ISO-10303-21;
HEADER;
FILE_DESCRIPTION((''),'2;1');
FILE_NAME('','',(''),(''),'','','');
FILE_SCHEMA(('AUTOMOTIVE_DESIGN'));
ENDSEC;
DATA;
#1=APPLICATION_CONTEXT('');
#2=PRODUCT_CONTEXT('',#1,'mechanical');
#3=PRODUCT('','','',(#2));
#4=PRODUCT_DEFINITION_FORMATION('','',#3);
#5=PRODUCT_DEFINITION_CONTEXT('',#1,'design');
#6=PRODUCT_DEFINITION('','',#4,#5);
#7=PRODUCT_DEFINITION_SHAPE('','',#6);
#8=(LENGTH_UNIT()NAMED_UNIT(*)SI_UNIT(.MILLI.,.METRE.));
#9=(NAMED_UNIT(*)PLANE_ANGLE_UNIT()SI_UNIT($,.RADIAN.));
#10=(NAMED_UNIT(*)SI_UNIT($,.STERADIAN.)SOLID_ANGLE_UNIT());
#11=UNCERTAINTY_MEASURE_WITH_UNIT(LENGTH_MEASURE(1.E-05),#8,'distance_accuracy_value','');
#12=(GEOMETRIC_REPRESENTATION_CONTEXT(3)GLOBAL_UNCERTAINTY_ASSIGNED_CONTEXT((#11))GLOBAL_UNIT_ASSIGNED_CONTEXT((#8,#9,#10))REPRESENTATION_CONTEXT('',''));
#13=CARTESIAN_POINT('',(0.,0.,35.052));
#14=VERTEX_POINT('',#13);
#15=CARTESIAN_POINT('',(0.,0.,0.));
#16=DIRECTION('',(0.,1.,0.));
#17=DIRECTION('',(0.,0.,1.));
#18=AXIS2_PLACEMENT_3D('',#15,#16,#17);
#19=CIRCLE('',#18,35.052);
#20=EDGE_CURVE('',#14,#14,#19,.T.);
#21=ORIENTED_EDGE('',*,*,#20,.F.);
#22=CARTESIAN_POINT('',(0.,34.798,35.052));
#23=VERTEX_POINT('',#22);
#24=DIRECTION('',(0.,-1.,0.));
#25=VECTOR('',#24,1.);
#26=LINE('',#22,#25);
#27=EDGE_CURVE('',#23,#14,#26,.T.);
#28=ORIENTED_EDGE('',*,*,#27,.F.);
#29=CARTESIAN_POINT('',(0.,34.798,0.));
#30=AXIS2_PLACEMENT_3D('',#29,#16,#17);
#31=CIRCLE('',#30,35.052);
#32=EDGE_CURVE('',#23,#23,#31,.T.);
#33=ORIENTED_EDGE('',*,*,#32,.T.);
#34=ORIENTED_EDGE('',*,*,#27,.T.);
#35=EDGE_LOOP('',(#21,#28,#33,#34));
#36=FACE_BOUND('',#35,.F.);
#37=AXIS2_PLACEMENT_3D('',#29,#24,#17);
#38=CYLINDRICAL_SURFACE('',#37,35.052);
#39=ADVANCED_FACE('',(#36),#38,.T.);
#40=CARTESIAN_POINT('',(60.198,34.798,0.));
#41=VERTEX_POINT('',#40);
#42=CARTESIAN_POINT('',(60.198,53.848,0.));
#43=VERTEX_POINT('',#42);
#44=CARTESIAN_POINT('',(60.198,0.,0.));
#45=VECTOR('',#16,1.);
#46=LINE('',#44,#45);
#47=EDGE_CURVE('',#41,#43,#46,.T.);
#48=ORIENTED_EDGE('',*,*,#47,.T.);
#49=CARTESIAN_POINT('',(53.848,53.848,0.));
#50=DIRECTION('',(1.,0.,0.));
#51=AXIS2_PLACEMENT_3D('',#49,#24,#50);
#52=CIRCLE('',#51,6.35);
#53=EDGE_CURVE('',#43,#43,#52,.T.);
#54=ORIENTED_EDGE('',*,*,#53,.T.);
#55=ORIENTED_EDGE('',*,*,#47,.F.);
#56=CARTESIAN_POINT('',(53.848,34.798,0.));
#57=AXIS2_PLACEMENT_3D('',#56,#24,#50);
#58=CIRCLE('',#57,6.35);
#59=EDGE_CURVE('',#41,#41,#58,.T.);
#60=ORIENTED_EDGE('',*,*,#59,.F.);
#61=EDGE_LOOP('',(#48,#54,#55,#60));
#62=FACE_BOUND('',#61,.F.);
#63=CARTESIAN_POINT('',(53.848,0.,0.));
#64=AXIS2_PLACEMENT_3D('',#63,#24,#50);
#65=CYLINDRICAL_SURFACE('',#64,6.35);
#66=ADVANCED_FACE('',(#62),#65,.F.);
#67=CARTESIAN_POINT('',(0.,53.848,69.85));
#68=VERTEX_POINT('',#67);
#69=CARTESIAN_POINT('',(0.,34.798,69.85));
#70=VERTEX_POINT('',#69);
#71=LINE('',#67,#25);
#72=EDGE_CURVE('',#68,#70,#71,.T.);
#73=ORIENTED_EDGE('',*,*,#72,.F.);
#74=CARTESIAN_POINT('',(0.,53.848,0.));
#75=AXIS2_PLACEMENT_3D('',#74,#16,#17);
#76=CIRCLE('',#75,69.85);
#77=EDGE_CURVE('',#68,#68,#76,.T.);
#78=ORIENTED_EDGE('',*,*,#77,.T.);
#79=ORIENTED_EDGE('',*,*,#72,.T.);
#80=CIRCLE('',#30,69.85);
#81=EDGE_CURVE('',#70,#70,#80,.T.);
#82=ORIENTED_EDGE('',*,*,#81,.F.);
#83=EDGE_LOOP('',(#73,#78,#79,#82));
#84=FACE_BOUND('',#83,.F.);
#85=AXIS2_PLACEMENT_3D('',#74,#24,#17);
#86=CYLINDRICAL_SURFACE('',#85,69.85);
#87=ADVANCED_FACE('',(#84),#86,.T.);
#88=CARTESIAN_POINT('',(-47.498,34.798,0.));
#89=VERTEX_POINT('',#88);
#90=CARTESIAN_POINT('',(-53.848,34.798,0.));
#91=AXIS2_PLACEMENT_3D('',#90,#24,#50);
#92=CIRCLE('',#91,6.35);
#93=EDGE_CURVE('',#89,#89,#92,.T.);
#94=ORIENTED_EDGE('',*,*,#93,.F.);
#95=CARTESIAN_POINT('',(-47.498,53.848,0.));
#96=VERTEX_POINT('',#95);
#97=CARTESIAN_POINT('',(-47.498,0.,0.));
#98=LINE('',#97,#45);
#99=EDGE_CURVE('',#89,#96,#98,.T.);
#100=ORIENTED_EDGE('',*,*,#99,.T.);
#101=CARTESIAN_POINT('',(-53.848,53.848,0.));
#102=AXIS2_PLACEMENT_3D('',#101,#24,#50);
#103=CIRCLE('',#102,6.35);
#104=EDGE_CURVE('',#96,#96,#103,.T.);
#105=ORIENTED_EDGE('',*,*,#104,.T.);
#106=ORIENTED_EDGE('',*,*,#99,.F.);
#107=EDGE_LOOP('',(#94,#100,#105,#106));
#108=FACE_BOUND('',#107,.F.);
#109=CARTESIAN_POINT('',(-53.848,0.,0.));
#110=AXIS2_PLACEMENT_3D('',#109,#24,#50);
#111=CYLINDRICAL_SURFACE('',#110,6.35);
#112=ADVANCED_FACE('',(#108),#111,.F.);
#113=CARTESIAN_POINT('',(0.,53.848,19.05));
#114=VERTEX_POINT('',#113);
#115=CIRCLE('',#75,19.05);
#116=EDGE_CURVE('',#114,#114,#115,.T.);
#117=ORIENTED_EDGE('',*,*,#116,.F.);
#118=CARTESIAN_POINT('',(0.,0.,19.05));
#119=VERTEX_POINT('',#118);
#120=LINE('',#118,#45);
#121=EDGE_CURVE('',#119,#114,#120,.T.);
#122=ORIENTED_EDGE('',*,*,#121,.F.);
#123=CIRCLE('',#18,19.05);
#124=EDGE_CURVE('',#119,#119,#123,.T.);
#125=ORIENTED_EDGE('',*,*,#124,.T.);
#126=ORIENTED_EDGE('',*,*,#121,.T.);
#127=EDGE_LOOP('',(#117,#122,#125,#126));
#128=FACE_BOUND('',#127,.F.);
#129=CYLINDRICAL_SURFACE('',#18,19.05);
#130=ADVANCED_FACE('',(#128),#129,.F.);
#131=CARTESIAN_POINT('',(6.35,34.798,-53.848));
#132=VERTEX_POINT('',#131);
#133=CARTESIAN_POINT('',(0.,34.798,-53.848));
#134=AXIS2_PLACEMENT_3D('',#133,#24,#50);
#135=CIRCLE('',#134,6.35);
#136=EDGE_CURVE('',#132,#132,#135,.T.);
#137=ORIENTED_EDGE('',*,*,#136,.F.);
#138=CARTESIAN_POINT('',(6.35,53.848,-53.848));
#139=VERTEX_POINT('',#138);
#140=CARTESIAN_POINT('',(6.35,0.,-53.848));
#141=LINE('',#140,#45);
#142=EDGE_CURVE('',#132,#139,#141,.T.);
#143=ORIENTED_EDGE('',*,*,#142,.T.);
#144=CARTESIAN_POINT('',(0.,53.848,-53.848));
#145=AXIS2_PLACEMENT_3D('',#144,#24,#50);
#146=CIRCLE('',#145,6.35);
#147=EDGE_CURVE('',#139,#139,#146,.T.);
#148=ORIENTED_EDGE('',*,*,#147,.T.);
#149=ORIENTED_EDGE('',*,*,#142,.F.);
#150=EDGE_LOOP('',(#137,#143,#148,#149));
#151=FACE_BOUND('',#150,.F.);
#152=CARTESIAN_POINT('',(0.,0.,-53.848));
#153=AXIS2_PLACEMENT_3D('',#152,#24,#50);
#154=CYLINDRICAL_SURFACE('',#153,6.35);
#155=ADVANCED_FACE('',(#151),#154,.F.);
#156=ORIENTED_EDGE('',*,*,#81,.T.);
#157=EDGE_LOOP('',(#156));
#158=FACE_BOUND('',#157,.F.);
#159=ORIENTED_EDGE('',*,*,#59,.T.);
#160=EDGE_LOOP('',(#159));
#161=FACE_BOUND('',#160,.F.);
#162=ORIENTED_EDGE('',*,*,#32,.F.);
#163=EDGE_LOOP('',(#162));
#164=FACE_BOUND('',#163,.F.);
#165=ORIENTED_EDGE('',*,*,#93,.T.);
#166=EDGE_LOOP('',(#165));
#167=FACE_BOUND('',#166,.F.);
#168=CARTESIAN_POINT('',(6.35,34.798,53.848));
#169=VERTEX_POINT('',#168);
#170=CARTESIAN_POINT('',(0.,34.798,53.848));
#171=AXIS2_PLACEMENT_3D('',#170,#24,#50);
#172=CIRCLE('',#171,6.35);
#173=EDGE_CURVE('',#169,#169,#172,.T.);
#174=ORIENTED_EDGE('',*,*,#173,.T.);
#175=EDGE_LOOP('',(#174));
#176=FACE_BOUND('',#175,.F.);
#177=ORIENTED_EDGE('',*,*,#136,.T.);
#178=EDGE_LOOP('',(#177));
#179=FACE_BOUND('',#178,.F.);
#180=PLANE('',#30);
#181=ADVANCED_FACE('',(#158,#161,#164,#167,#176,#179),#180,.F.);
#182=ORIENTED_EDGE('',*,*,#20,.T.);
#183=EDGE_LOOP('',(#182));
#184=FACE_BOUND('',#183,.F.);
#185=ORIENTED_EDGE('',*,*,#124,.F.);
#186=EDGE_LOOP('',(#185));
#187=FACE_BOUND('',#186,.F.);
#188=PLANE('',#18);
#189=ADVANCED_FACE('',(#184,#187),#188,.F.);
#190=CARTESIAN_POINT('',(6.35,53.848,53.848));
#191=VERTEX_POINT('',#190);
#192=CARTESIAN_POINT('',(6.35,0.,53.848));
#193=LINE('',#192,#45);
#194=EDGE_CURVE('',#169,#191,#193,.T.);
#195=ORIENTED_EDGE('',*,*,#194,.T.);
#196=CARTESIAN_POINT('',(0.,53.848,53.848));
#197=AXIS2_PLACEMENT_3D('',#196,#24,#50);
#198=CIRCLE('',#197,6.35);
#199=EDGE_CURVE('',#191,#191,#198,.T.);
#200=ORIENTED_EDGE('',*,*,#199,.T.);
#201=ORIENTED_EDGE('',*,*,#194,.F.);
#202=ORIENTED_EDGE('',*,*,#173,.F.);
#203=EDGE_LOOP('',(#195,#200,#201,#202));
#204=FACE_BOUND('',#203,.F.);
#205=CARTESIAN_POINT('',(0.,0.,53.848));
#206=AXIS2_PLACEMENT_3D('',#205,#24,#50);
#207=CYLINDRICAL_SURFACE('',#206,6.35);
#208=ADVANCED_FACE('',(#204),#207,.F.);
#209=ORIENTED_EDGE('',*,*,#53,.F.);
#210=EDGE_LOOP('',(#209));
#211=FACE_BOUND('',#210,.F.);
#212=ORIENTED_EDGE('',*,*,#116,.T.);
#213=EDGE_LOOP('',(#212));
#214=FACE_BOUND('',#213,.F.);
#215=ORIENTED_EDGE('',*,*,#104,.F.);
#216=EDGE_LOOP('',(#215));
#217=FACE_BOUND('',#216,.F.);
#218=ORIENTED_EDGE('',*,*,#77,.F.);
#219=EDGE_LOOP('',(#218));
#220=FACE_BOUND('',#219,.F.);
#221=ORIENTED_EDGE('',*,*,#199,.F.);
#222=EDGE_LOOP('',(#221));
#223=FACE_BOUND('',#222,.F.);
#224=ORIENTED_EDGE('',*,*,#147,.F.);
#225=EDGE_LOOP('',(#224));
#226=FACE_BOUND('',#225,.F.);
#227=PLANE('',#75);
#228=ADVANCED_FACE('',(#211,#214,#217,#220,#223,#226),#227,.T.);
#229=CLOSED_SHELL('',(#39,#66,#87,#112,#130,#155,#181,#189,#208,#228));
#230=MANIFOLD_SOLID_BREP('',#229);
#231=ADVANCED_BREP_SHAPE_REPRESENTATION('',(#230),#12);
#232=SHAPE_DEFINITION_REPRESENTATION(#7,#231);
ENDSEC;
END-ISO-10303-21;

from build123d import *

# Parameters (mm, degrees)
F2_R     = 6.35
F3_DEPTH = 53.849


with BuildPart() as f1:
    # F0 (on Right) → F1 (revolve)
    with BuildSketch(Plane.YZ):
        Polygon((34.798, 35.052), (0, 35.052), (0, 19.05), (53.848, 19.05), (53.848, 69.85), (34.798, 69.85), align=None)
    revolve(axis=Axis((0, 53.1494372582, 0), (0, 1, 0)))

    # F2 (on Front) → F3 (cut, through all)
    with BuildSketch(Plane.XZ):
        with Locations((-53.848, 0)):
            Circle(F2_R)
        with Locations((0, 53.848)):
            Circle(F2_R)
        with Locations((53.848, 0)):
            Circle(F2_R)
        with Locations((0, -53.848)):
            Circle(F2_R)
    extrude(amount=-F3_DEPTH, mode=Mode.SUBTRACT)


solid = f1.part
